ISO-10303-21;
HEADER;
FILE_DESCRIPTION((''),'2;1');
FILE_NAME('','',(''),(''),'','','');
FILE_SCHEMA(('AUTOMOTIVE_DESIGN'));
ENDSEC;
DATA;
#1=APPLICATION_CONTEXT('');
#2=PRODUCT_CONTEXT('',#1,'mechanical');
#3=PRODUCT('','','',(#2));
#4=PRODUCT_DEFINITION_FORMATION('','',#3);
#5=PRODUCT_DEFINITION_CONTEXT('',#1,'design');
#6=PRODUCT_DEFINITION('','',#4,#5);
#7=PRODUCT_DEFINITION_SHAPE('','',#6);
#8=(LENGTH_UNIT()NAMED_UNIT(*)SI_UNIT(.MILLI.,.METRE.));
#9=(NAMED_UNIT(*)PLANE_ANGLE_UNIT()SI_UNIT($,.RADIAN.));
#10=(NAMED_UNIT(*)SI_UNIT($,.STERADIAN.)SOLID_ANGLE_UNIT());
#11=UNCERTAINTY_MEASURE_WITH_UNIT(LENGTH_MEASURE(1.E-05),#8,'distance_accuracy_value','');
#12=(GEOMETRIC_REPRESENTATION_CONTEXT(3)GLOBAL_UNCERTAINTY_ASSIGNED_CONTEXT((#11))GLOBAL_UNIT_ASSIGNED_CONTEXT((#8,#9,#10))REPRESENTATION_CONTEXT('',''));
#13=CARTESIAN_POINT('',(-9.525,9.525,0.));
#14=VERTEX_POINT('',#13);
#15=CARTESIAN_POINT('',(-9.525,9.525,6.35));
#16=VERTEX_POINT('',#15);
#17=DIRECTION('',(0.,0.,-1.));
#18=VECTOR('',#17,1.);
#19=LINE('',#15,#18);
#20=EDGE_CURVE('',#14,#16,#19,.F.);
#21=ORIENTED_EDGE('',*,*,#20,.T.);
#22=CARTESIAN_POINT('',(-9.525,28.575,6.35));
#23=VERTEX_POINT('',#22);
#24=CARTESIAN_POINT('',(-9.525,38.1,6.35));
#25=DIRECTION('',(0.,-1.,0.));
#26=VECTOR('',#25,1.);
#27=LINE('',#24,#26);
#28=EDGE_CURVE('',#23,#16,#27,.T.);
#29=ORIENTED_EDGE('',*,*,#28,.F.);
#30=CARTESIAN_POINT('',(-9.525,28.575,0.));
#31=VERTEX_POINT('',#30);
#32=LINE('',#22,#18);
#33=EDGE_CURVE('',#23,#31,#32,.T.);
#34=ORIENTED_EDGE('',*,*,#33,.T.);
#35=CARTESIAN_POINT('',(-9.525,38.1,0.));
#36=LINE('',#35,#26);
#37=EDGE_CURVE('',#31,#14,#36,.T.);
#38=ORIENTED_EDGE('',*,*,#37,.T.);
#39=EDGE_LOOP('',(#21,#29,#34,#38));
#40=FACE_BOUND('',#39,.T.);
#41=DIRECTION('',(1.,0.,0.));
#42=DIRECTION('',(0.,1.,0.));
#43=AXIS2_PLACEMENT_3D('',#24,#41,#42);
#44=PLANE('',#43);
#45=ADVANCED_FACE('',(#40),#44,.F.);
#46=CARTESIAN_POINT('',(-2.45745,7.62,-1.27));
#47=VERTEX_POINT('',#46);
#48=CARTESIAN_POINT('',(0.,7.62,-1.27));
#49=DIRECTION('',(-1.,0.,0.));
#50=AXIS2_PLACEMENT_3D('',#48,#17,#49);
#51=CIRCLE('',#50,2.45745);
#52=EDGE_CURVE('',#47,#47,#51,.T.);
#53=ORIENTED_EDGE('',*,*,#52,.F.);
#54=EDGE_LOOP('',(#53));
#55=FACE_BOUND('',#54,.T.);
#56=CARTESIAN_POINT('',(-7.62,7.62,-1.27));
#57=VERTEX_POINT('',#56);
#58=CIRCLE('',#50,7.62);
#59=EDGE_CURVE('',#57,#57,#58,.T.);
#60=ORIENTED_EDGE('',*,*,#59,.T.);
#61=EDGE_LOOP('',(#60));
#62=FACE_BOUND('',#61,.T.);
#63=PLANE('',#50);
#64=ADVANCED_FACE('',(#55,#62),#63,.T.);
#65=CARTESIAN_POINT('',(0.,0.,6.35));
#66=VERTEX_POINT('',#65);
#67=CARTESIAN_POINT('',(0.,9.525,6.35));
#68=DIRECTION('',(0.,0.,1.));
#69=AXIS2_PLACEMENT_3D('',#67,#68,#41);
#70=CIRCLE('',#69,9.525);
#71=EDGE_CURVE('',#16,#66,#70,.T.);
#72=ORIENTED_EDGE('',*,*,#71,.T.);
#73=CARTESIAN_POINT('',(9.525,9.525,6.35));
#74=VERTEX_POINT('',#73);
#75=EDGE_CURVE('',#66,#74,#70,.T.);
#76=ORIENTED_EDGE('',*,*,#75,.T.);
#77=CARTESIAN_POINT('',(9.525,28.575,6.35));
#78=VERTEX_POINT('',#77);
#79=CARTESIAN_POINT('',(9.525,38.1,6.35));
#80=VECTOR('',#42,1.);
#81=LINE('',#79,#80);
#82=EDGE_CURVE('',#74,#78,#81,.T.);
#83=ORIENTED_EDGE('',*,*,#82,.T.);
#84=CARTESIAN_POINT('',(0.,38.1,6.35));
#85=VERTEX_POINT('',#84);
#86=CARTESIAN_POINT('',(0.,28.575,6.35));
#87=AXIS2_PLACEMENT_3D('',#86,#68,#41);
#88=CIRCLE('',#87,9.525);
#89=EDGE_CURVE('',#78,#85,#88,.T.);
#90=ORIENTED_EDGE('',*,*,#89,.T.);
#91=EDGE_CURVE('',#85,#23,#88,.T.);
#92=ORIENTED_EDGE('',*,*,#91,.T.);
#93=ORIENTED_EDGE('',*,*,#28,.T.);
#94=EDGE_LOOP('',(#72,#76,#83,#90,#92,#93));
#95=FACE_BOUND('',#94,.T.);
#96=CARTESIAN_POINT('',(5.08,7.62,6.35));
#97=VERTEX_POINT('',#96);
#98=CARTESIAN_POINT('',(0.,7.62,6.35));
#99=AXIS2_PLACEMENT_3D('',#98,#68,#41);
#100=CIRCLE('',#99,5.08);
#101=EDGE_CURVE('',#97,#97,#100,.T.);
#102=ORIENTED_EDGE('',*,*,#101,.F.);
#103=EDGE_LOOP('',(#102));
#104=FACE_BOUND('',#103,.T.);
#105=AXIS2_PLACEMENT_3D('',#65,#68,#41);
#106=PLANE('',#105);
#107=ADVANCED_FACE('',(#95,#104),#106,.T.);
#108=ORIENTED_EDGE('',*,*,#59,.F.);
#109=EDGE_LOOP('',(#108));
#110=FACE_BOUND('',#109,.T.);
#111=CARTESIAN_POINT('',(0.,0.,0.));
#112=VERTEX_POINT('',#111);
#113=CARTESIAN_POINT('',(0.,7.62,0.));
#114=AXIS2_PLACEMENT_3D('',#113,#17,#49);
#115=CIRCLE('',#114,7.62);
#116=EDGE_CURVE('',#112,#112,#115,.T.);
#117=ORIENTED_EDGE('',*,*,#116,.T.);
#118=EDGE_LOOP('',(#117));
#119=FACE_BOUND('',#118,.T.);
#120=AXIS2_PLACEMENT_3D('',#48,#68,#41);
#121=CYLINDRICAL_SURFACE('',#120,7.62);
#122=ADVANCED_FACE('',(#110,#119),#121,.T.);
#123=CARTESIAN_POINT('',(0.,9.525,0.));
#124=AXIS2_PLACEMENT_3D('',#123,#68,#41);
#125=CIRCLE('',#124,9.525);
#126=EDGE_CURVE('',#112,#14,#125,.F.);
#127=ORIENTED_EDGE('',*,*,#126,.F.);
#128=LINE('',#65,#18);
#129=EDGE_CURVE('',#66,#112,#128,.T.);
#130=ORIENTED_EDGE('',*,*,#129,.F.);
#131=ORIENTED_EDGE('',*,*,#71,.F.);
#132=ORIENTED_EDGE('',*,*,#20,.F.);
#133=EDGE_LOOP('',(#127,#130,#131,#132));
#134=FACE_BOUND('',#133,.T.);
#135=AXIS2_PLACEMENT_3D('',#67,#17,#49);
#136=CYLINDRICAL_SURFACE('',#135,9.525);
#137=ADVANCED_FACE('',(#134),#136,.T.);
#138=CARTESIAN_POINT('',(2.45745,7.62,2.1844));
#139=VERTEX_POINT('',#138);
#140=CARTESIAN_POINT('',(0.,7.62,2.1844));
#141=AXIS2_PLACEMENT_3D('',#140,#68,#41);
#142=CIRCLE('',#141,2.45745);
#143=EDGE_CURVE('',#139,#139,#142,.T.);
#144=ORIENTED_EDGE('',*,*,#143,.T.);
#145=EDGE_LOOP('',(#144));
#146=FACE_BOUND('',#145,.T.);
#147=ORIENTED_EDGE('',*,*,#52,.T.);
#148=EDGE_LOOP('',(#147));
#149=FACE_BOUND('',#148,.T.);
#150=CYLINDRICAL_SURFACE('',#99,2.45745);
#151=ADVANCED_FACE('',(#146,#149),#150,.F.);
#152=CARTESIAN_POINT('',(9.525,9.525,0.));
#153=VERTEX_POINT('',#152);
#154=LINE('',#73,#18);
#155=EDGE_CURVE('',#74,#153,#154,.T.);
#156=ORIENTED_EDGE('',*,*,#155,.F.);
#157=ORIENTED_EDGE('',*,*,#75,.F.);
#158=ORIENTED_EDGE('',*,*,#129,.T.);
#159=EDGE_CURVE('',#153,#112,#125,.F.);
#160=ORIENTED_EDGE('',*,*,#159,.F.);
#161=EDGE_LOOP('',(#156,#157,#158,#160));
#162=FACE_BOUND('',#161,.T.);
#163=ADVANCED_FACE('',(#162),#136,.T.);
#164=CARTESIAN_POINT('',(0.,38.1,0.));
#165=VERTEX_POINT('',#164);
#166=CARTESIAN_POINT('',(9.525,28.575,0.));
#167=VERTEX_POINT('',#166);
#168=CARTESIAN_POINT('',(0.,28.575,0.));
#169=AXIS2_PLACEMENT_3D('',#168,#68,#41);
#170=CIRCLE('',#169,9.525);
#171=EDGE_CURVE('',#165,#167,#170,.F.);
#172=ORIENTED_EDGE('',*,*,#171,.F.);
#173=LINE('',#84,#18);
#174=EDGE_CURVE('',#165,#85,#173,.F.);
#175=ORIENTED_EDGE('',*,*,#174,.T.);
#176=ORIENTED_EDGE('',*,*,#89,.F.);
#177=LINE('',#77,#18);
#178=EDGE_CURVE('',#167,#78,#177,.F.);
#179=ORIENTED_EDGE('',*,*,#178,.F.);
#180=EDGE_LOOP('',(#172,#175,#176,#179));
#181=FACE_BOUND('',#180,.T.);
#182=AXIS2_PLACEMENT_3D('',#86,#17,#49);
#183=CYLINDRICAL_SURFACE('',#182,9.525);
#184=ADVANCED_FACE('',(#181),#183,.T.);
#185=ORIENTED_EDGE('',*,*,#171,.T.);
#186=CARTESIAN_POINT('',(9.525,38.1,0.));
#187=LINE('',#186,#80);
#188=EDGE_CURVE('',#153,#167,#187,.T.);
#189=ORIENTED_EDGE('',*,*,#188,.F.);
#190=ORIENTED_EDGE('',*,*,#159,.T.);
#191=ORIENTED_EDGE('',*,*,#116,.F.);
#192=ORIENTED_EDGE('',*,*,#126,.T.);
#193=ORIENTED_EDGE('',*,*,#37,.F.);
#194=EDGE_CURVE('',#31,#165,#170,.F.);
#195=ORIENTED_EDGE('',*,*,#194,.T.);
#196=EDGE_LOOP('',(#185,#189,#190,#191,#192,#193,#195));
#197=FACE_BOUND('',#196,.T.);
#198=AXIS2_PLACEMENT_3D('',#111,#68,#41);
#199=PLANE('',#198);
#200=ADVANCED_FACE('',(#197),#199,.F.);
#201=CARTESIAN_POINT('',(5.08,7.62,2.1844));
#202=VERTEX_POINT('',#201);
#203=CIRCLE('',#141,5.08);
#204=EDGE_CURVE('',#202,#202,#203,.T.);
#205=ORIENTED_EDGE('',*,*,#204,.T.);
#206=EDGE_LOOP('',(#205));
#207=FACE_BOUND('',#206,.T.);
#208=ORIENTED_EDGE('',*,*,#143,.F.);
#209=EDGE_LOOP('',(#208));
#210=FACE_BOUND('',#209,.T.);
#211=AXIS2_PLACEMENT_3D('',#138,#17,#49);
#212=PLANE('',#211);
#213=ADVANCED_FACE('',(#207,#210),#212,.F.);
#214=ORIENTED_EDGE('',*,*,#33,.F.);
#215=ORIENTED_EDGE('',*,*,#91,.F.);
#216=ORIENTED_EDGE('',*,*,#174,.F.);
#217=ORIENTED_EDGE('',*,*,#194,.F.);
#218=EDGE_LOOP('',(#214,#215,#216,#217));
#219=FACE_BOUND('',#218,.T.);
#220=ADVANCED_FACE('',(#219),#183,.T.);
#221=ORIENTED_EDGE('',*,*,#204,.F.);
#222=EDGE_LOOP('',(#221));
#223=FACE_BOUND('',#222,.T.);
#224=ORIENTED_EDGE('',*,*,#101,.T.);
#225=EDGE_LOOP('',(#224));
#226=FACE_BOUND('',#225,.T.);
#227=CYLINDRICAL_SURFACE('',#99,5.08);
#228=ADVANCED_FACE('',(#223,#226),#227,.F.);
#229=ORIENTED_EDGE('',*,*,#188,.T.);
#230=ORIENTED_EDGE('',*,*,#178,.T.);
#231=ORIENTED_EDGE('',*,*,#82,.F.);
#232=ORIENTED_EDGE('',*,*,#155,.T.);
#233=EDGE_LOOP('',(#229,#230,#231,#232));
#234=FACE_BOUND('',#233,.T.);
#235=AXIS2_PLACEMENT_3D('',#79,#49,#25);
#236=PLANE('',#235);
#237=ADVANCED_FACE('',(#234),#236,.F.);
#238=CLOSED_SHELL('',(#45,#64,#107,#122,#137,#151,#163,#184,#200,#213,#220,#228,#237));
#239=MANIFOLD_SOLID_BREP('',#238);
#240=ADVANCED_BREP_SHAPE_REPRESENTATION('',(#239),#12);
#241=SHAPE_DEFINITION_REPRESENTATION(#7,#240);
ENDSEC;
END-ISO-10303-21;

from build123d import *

# Parameters (mm, degrees)
SKETCH1_W                                      = 19.05
SKETCH1_H                                      = 38.1
BOSS_EXTRUDE1_DEPTH                            = 6.35
CBORE_FOR_8_SOCKET_HEAD_CAP_SCREW1_D           = 4.9149
CBORE_FOR_8_SOCKET_HEAD_CAP_SCREW1_CBORE_D     = 10.16
CBORE_FOR_8_SOCKET_HEAD_CAP_SCREW1_CBORE_DEPTH = 4.1656
BOSS_EXTRUDE2_START                            = 1.27
SKETCH4_R                                      = 7.62
SKETCH4_R_2                                    = 2.45745
BOSS_EXTRUDE2_DEPTH                            = 1.27
FILLET1_R                                      = 9.525


with BuildPart() as part:
    # Sketch1 → Boss-Extrude1 (new body)
    with BuildSketch(Plane.XY):
        with Locations((0, 19.05)):
            Rectangle(SKETCH1_W, SKETCH1_H)
    extrude(amount=BOSS_EXTRUDE1_DEPTH)

    # CBORE for #8 Socket Head Cap Screw1 (through all)
    with Locations(Plane.XY.offset(6.35)):
        with Locations((0, 7.62)):
            CounterBoreHole(CBORE_FOR_8_SOCKET_HEAD_CAP_SCREW1_D / 2, CBORE_FOR_8_SOCKET_HEAD_CAP_SCREW1_CBORE_D / 2, CBORE_FOR_8_SOCKET_HEAD_CAP_SCREW1_CBORE_DEPTH)

    # Sketch4 → Boss-Extrude2 (add)
    with BuildSketch(Plane(origin=(0, 0, 0), x_dir=(-1, 0, 0), z_dir=(0, 0, -1)).offset(BOSS_EXTRUDE2_START)):
        with Locations(Location((0, 7.62, 0), (0, 0, 270))):
            Circle(SKETCH4_R)
        with Locations(Location((0, 7.62, 0), (0, 0, 180))):
            Circle(SKETCH4_R_2, mode=Mode.SUBTRACT)
    extrude(amount=-BOSS_EXTRUDE2_DEPTH)

    # Fillet1
    fillet1_edges = [part.edges().sort_by_distance(p)[0] for p in [
        (9.525, 38.1, 3.175),
        (-9.525, 38.1, 3.175),
        (9.525, 0, 3.175),
        (-9.525, 0, 3.175),
    ]]
    fillet(fillet1_edges, radius=FILLET1_R - 0.0001)  # a hair under: the kernel refuses the full size


solid = part.part
